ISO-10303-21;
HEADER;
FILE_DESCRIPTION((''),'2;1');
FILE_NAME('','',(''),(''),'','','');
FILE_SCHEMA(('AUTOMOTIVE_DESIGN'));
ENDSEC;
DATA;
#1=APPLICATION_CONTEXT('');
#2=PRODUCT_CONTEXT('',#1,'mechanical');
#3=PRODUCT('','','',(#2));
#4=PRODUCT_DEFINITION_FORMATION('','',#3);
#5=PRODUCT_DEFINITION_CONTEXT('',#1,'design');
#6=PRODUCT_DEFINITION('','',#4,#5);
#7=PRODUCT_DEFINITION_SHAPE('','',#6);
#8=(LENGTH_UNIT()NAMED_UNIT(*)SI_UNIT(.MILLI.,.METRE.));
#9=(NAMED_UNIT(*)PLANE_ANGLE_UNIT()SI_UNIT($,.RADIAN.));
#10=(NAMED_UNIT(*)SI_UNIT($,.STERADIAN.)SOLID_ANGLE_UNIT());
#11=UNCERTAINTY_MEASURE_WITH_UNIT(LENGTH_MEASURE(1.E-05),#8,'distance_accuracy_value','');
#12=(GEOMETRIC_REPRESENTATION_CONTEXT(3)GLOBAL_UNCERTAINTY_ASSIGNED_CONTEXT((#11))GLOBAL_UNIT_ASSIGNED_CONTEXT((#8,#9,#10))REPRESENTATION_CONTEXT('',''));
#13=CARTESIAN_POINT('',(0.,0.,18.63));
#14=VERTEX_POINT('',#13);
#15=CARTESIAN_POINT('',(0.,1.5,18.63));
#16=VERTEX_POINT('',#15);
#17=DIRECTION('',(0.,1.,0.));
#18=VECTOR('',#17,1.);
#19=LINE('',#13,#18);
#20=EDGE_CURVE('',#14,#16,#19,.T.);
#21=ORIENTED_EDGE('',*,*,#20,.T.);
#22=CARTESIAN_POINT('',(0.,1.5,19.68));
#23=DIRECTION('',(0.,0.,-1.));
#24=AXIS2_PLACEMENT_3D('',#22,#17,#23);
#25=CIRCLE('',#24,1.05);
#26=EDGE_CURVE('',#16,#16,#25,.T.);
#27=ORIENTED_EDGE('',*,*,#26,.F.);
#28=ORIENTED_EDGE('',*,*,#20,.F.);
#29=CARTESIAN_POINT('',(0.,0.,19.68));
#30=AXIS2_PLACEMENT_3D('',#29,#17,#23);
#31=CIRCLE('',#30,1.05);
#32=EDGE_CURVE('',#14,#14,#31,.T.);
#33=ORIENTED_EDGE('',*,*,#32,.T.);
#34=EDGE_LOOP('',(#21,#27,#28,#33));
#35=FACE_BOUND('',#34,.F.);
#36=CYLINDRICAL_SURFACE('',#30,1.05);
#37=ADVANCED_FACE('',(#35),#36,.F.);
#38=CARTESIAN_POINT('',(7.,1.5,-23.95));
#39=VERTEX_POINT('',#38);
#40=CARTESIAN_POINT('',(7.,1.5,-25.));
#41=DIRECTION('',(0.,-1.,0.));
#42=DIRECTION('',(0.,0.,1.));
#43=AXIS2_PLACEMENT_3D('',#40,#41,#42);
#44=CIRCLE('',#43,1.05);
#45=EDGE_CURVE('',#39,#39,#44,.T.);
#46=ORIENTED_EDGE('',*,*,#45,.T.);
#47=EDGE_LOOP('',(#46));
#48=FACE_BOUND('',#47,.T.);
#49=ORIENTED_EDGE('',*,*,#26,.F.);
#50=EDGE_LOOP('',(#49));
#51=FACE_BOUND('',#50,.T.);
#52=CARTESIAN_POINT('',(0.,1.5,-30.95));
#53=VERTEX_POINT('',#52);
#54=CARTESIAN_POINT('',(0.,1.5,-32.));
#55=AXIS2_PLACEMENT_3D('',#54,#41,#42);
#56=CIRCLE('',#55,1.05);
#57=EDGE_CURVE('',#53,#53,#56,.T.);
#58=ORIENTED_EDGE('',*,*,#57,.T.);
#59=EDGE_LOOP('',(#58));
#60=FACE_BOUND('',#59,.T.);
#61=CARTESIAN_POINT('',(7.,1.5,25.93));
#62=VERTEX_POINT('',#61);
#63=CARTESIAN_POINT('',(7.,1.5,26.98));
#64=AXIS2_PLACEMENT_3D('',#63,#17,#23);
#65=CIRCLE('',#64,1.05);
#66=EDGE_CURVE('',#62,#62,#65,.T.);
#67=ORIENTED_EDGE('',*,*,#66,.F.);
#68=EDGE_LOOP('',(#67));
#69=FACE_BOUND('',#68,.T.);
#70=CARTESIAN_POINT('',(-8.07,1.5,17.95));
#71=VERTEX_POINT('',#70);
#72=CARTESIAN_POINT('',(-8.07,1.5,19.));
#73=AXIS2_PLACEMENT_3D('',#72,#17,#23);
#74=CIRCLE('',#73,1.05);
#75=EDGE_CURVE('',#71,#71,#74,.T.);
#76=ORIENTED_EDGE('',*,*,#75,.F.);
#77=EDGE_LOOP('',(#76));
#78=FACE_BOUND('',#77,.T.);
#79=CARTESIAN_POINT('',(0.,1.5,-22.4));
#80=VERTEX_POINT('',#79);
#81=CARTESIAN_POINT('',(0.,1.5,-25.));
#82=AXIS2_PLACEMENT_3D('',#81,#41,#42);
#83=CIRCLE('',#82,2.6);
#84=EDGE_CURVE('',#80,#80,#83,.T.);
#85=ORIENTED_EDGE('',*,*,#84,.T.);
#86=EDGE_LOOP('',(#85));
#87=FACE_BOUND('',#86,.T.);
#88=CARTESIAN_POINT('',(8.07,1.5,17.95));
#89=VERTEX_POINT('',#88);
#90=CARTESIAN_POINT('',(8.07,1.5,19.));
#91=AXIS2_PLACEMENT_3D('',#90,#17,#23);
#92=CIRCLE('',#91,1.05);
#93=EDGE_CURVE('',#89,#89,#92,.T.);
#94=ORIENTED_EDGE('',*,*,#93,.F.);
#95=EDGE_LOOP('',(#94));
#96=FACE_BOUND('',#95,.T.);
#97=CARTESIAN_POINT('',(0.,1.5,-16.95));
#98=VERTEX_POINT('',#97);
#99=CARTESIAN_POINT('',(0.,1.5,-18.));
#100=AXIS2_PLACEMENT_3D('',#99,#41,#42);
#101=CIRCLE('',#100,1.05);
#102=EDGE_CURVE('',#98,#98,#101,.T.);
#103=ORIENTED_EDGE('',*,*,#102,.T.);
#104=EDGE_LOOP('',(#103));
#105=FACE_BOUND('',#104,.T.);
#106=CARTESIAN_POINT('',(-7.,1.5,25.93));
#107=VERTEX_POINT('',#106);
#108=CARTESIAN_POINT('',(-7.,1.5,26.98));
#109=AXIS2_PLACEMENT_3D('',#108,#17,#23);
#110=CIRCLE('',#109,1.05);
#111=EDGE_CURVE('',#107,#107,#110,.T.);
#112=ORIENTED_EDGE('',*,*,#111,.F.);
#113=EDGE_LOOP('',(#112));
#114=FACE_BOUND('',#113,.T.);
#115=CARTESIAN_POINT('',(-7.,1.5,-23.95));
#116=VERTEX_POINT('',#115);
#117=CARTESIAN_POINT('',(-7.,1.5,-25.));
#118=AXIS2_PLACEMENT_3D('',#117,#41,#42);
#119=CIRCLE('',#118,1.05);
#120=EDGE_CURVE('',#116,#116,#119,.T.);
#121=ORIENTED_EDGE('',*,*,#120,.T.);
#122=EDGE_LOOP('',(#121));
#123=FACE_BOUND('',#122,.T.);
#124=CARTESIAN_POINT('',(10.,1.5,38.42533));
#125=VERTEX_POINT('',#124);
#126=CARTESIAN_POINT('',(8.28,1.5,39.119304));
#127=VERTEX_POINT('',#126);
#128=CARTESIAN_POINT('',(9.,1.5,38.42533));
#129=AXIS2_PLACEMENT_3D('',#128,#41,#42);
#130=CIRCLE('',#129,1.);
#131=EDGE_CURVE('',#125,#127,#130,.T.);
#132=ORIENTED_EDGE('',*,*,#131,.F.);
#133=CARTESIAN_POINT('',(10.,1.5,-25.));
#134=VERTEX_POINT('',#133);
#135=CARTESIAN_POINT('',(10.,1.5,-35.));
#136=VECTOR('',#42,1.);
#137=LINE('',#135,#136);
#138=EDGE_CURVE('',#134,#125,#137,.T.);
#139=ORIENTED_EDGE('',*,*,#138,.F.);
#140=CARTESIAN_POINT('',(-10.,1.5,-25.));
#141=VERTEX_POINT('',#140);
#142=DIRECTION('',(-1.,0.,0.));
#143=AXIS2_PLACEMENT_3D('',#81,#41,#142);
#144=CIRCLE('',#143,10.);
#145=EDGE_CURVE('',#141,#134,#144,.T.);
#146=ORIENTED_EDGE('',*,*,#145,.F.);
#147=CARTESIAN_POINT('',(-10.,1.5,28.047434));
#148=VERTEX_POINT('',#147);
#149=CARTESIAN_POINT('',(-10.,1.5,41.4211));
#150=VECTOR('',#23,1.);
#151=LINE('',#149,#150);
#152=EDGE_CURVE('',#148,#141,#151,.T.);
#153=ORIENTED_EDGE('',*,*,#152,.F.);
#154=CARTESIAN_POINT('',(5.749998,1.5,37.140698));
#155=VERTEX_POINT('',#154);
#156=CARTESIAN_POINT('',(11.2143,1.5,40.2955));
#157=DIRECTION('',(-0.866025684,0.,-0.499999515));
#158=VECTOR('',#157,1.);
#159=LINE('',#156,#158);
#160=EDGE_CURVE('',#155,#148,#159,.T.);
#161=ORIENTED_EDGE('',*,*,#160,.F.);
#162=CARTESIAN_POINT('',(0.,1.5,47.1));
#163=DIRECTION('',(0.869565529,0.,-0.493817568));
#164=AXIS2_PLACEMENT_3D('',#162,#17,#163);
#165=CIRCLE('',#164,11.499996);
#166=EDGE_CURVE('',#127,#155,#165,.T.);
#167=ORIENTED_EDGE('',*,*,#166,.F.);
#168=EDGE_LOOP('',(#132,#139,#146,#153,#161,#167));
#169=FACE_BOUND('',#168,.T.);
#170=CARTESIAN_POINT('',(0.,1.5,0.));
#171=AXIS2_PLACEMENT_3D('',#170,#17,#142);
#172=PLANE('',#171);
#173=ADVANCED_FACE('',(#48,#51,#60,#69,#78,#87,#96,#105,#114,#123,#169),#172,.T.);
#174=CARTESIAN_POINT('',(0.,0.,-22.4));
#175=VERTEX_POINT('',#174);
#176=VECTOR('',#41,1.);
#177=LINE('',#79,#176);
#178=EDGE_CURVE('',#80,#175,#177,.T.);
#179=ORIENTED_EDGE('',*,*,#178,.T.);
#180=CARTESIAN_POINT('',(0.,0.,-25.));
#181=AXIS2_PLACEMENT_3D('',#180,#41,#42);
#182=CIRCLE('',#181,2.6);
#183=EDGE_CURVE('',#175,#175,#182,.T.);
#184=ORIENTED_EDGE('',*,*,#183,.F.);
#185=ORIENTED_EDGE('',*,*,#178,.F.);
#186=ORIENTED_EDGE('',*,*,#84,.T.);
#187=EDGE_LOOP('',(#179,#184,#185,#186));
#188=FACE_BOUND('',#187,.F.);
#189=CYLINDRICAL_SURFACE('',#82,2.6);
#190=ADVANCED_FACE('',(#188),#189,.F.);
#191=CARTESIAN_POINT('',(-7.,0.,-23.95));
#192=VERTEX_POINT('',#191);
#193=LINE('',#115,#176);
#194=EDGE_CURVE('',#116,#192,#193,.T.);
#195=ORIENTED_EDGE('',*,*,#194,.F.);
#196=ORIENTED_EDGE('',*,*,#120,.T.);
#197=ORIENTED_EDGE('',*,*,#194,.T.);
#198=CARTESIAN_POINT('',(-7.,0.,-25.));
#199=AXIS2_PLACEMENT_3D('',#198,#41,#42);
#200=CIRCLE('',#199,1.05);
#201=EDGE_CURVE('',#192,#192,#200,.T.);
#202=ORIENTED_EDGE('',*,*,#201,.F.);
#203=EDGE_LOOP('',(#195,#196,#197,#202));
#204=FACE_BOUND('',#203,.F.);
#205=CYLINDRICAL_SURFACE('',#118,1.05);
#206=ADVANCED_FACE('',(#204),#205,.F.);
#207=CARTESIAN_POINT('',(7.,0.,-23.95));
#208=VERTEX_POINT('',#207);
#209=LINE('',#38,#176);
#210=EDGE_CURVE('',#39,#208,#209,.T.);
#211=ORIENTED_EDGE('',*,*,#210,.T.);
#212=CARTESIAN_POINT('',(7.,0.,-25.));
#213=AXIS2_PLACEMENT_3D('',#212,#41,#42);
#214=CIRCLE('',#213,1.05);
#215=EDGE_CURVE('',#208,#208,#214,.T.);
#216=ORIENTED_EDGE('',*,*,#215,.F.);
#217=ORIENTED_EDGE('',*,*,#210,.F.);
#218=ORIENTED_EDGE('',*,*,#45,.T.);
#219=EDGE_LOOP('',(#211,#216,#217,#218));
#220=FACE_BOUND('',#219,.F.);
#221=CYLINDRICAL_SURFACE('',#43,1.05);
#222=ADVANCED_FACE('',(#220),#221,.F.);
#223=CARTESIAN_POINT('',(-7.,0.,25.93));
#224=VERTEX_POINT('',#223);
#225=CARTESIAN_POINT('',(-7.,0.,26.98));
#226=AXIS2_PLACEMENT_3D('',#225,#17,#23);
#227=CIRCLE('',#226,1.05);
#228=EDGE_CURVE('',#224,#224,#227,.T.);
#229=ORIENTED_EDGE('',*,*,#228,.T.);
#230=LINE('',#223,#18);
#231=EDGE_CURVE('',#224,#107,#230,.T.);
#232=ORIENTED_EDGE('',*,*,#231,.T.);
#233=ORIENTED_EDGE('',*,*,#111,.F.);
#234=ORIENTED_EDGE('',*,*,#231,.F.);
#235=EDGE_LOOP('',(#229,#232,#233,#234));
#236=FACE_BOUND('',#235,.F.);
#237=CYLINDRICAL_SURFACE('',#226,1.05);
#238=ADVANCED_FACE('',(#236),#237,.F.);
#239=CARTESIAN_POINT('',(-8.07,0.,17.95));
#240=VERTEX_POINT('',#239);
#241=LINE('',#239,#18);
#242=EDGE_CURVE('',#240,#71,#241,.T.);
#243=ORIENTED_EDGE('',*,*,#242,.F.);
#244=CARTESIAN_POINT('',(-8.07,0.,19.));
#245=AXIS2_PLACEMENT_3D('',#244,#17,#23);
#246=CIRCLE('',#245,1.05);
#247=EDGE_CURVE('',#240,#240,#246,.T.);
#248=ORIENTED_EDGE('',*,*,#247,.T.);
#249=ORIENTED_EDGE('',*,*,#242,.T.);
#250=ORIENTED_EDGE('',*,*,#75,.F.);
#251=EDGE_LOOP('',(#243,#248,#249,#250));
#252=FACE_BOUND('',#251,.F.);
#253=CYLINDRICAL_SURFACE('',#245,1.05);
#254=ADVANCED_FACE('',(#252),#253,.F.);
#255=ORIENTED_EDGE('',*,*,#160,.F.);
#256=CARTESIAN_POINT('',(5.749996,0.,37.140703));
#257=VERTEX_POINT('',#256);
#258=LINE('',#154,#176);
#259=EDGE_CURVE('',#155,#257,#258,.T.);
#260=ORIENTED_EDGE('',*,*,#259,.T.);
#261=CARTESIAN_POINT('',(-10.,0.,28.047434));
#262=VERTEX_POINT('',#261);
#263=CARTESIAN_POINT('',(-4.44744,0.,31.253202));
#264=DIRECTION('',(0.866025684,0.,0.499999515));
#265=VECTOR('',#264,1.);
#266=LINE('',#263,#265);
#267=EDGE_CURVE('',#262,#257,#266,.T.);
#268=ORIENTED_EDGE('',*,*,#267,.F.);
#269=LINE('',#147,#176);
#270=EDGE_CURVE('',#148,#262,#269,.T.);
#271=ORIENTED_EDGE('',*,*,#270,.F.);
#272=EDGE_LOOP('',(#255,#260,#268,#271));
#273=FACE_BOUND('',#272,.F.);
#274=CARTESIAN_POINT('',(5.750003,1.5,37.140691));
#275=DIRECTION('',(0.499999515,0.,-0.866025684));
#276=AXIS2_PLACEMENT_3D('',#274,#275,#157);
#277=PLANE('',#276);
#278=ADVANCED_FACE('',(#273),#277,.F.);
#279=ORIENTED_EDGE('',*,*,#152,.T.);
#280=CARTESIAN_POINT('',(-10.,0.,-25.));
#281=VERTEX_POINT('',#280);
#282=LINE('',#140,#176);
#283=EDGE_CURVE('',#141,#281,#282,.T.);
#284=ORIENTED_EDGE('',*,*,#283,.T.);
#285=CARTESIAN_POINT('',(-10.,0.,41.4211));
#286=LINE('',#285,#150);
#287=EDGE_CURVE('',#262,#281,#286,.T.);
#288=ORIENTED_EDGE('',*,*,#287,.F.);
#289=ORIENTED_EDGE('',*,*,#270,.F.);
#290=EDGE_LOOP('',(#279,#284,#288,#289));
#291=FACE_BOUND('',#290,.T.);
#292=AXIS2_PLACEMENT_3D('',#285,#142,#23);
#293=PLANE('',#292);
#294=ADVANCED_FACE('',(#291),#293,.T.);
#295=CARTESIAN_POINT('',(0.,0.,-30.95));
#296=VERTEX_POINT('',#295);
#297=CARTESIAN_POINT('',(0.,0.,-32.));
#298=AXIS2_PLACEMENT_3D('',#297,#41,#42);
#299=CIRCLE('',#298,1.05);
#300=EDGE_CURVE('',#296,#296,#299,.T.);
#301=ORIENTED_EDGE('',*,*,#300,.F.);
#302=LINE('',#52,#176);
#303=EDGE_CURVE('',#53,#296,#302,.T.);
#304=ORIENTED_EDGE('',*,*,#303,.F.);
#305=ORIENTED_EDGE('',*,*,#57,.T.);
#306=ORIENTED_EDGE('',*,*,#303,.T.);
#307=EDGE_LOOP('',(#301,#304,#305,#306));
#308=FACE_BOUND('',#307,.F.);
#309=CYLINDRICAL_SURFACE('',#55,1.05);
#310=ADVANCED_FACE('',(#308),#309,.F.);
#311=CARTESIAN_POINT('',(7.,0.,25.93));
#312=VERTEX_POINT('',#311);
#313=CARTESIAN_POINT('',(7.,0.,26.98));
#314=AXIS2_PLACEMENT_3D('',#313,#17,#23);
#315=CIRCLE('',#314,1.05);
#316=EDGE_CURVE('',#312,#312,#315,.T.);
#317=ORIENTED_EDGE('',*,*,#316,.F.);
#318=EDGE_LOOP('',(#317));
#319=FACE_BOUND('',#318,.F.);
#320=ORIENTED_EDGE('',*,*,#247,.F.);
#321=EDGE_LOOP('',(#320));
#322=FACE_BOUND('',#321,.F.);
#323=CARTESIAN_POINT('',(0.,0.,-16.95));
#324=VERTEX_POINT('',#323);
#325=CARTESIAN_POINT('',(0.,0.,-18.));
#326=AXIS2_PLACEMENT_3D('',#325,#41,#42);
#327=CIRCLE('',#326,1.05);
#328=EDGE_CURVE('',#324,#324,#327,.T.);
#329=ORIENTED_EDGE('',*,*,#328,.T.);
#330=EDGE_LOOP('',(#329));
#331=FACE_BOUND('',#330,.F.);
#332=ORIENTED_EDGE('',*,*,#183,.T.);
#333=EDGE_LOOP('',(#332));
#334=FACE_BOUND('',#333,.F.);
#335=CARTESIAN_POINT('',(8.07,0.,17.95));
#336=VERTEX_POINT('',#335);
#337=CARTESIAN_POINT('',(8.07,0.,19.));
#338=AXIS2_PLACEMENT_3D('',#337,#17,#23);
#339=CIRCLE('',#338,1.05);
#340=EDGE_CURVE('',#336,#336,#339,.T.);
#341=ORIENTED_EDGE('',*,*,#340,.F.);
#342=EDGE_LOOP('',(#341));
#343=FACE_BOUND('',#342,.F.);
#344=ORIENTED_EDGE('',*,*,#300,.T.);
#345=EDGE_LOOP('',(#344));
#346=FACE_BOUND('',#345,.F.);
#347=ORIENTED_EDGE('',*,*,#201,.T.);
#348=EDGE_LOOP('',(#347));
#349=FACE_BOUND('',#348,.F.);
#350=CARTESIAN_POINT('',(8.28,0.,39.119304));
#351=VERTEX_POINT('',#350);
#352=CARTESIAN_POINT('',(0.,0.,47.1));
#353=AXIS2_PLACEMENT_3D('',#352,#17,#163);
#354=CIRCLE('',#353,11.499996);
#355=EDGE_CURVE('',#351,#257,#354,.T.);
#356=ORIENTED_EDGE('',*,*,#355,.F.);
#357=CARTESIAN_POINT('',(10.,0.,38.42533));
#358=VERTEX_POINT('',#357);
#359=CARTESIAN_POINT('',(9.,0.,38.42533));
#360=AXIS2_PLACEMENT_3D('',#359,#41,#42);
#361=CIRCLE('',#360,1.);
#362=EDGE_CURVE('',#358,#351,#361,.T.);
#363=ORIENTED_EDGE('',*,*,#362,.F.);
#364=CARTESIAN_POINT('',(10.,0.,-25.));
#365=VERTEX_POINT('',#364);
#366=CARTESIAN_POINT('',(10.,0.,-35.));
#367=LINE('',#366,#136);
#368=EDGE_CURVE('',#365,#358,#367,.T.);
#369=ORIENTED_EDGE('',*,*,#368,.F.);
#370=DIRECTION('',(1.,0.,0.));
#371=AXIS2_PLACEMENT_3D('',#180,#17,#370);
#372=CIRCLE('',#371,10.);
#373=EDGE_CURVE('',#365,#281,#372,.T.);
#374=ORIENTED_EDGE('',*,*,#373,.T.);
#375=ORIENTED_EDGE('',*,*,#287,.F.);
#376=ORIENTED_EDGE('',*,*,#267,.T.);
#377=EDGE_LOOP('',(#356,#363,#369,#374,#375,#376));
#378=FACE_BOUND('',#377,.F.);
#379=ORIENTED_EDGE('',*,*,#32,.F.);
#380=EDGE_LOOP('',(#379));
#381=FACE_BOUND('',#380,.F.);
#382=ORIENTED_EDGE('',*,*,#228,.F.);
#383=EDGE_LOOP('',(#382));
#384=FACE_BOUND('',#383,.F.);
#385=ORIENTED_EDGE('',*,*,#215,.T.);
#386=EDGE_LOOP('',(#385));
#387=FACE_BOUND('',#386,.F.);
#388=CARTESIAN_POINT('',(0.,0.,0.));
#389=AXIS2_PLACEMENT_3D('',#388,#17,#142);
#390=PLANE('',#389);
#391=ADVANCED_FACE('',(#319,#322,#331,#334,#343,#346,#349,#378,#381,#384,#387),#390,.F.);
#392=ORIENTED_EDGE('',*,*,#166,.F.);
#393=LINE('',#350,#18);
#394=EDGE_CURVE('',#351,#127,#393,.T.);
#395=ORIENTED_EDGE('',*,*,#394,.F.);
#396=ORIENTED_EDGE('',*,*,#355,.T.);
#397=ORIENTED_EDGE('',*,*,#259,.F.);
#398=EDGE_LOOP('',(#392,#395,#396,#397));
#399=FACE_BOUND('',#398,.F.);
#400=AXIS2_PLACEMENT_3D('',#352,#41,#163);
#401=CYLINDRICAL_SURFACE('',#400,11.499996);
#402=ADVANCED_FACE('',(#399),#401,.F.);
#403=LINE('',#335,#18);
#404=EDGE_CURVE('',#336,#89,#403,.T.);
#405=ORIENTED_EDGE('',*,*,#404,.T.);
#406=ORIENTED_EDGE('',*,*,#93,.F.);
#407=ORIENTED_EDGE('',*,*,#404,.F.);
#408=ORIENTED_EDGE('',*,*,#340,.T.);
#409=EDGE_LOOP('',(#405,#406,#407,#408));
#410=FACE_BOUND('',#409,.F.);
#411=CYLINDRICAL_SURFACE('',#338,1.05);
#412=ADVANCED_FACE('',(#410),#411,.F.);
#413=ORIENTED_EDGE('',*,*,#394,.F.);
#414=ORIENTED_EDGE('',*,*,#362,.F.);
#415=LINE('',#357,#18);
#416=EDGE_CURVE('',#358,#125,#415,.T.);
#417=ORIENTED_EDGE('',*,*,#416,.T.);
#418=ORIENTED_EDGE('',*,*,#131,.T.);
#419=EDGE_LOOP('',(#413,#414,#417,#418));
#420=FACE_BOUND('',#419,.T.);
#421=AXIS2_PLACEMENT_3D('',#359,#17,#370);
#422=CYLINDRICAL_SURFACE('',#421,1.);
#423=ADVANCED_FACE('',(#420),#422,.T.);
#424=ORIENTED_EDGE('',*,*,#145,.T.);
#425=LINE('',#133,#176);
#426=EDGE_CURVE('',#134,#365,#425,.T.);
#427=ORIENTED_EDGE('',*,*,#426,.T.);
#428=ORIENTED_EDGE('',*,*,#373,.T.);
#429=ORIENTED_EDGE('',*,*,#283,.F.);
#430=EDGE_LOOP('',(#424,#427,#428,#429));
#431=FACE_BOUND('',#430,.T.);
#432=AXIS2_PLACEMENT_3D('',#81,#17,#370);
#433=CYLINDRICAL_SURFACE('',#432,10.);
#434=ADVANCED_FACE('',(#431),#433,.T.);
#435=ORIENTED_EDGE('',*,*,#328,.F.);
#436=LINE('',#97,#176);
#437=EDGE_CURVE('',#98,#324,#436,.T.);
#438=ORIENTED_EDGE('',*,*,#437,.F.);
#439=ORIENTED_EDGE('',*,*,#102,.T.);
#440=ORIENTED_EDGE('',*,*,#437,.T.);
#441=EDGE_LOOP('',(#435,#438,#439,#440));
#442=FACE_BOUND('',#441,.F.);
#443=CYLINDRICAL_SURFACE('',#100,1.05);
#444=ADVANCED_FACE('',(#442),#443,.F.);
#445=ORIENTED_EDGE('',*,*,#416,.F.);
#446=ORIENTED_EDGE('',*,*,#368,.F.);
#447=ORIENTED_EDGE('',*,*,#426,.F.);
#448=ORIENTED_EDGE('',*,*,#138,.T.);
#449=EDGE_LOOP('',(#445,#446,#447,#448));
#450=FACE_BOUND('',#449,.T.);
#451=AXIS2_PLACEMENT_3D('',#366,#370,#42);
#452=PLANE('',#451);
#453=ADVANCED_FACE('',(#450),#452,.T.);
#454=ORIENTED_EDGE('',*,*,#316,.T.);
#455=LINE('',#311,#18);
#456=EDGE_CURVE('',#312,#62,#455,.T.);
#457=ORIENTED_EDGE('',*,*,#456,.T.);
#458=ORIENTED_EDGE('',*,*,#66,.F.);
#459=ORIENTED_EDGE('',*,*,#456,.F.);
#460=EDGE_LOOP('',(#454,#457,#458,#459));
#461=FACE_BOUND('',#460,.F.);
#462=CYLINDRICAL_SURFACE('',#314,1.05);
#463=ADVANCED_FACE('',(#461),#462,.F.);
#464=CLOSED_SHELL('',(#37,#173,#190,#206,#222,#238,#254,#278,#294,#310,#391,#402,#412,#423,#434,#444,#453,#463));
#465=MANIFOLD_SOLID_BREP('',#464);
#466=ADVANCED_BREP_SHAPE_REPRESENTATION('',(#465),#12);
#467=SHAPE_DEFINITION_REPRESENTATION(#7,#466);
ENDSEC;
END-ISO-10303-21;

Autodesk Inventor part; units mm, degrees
ref_plane "YZ Plane" through (0, 0, 0) normal (1, 0, 0) x (0, 1, 0)
ref_plane "XZ Plane" through (0, 0, 0) normal (0, 1, 0) x (-1, 0, 0)
ref_plane "XY Plane" through (0, 0, 0) normal (0, 0, 1) x (1, 0, 0)
sketch "Sketch1" plane through (0, 0, 0) normal (0, 1, 0) x (-1, 0, 0)
  line L0 (10, -35) -> (-10, -35)
  line L1 (-10, -35) -> (-10, 41.4211)
  line L2 (10, 41.4211) -> (10, -35)
  arc A0 (-10, 41.4211) -> (10, 41.4211) centre (0, 47.1) ccw
  point P0 (0, 0)
  dimension "d2" = 35
  dimension "d3" = 10
  dimension "d36" = 23
  dimension "d37" = 82.1
  dimension "d39" = 76.4211
  dimension "d40" = 20
extrude "Plate1" add sketch "Sketch1" along normal blind 1.5
sketch "Sketch3" plane through (0, 1.5, 0) normal (0, 1, 0) x (1, 0, 0)
  circle A0 centre (0, 25) radius 10
  circle A1 centre (0, -25) radius 10
  line L0 (-10, 35) -> (10, 35) projected
  line L1 (10, -44) -> (-10, -44) projected
  line L2 (-10, 35) -> (10, 35)
  line L3 (10, 35) -> (10, 25)
  line L4 (10, 25) -> (-10, 25)
  line L5 (-10, 25) -> (-10, 35)
  line L6 (10, -35) -> (-10, -35)
  line L7 (-10, -35) -> (-10, -25)
  line L8 (-10, -25) -> (10, -25)
  line L9 (10, -25) -> (10, -44)
  point P0 (0, 0)
  point P1 (-10, -41.4211)
  point P2 (10, -25)
  point P3 (0, -35)
  point P4 (-10, -35)
  point P5 (0, 35)
  point P6 (10, 35)
  dimension "d12" = 20
  dimension "d13" = 20
  dimension "d14" = 10
  dimension "d15" = 10
  dimension "d16" = 25
  dimension "d17" = 25
  dimension "d18" = 10
extrude "Extrusion1" cut sketch "Sketch3" against normal blind 10 contours L5 L0 A0 | A0 L0 L3
sketch "Sketch4" plane through (0, 1.5, 0) normal (0, 1, 0) x (1, 0, 0)
  circle A0 centre (-7, 25) radius 0.8
  arc A1 (10, 25) -> (-10, 25) centre (0, 25) ccw projected
  circle A2 centre (0, 18) radius 0.8
  circle A3 centre (7, 25) radius 0.8
  circle A4 centre (0, 32) radius 0.8
  point P0 (0, 0)
  dimension "d21" = 0
  dimension "d22" = 7
  dimension "d23" = 1.6
  dimension "d26" = 360
hole "Hole2" at (0, 1.5, -32) at (7, 1.5, -25) at (0, 1.5, -18) at (-7, 1.5, -25) direction (0, -1, 0) diameter 2.1 depth 1.5
sketch "Sketch5" plane through (0, 1.5, 0) normal (0, 1, 0) x (1, 0, 0)
  arc A0 (10, 25) -> (-10, 25) centre (0, 25) ccw projected
  point P0 (0, 0)
hole "Hole3" at (0, 1.5, -25) direction (0, -1, 0) diameter 5.2 depth 1.5 clearance for "Hex Head Bolt" size "M5" standard "Ansi Metric M Profile"
fillet "Fillet1" radius 1 2 edges at (10, 0.75, 41.4211) (-10, 0.75, 41.4211)
sketch "Sketch8" plane through (0, 1.5, 0) normal (0, 1, 0) x (1, 0, 0)
  line L0 (11.2143, -40.2955) -> (-26.5306, -18.5035)
  arc A0 (8.28, -39.1193) -> (-8.28, -39.1193) centre (0, -47.1) ccw projected
  line L1 (-10, -38.4253) -> (-10, 25) projected
  arc A1 (-10, -38.4253) -> (-8.28, -39.1193) centre (-9, -38.4253) ccw projected
  point P0 (0, 0)
  point P1 (5.75, -37.1407)
  point P2 (-10, -28.0474)
  dimension "d63" = 60
extrude "Extrusion2" cut sketch "Sketch8" against normal up to next
sketch "Sketch9" plane through (0, 0, 0) normal (0, -1, 0) x (1, 0, 0)
  circle A0 centre (8.07, 19) radius 1.05
  circle A1 centre (7, 26.98) radius 1.05
  circle A2 centre (0, 19.68) radius 1.05
  circle A3 centre (-7, 26.98) radius 0.7835
  circle A4 centre (-8.07, 19) radius 0.7835
  point P0 (0, 0)
hole "Hole6" at (8.07, 0, 19) at (7, 0, 26.98) at (0, 0, 19.68) at (-7, 0, 26.98) at (-8.07, 0, 19) direction (0, 1, 0) diameter 2.1 depth 1.5
equation "\"d33\" = Thickness"
equation "\"d46\" = Thickness"
equation "\"d71\" = Thickness"
equation "\"d4\" = Thickness"
equation "\"BendReliefWidth\" = Thickness"
equation "\"BendReliefDepth\" = 0.5 * Thickness"
equation "\"CornerReliefSize\" = 4 * Thickness"
equation "\"MinimumRemnant\" = 2 * Thickness"
equation "\"TransitionRadius\" = BendRadius"
equation "\"JacobiRadiusSize\" = BendRadius"
equation "\"GapSize\" = Thickness"
equation "\"Thickness\" = 1.5"
equation "\"BendRadius\" = 0.31"
properties part number "axis_8_10_connector_frame" material "Aluminum 6061-AHC"
